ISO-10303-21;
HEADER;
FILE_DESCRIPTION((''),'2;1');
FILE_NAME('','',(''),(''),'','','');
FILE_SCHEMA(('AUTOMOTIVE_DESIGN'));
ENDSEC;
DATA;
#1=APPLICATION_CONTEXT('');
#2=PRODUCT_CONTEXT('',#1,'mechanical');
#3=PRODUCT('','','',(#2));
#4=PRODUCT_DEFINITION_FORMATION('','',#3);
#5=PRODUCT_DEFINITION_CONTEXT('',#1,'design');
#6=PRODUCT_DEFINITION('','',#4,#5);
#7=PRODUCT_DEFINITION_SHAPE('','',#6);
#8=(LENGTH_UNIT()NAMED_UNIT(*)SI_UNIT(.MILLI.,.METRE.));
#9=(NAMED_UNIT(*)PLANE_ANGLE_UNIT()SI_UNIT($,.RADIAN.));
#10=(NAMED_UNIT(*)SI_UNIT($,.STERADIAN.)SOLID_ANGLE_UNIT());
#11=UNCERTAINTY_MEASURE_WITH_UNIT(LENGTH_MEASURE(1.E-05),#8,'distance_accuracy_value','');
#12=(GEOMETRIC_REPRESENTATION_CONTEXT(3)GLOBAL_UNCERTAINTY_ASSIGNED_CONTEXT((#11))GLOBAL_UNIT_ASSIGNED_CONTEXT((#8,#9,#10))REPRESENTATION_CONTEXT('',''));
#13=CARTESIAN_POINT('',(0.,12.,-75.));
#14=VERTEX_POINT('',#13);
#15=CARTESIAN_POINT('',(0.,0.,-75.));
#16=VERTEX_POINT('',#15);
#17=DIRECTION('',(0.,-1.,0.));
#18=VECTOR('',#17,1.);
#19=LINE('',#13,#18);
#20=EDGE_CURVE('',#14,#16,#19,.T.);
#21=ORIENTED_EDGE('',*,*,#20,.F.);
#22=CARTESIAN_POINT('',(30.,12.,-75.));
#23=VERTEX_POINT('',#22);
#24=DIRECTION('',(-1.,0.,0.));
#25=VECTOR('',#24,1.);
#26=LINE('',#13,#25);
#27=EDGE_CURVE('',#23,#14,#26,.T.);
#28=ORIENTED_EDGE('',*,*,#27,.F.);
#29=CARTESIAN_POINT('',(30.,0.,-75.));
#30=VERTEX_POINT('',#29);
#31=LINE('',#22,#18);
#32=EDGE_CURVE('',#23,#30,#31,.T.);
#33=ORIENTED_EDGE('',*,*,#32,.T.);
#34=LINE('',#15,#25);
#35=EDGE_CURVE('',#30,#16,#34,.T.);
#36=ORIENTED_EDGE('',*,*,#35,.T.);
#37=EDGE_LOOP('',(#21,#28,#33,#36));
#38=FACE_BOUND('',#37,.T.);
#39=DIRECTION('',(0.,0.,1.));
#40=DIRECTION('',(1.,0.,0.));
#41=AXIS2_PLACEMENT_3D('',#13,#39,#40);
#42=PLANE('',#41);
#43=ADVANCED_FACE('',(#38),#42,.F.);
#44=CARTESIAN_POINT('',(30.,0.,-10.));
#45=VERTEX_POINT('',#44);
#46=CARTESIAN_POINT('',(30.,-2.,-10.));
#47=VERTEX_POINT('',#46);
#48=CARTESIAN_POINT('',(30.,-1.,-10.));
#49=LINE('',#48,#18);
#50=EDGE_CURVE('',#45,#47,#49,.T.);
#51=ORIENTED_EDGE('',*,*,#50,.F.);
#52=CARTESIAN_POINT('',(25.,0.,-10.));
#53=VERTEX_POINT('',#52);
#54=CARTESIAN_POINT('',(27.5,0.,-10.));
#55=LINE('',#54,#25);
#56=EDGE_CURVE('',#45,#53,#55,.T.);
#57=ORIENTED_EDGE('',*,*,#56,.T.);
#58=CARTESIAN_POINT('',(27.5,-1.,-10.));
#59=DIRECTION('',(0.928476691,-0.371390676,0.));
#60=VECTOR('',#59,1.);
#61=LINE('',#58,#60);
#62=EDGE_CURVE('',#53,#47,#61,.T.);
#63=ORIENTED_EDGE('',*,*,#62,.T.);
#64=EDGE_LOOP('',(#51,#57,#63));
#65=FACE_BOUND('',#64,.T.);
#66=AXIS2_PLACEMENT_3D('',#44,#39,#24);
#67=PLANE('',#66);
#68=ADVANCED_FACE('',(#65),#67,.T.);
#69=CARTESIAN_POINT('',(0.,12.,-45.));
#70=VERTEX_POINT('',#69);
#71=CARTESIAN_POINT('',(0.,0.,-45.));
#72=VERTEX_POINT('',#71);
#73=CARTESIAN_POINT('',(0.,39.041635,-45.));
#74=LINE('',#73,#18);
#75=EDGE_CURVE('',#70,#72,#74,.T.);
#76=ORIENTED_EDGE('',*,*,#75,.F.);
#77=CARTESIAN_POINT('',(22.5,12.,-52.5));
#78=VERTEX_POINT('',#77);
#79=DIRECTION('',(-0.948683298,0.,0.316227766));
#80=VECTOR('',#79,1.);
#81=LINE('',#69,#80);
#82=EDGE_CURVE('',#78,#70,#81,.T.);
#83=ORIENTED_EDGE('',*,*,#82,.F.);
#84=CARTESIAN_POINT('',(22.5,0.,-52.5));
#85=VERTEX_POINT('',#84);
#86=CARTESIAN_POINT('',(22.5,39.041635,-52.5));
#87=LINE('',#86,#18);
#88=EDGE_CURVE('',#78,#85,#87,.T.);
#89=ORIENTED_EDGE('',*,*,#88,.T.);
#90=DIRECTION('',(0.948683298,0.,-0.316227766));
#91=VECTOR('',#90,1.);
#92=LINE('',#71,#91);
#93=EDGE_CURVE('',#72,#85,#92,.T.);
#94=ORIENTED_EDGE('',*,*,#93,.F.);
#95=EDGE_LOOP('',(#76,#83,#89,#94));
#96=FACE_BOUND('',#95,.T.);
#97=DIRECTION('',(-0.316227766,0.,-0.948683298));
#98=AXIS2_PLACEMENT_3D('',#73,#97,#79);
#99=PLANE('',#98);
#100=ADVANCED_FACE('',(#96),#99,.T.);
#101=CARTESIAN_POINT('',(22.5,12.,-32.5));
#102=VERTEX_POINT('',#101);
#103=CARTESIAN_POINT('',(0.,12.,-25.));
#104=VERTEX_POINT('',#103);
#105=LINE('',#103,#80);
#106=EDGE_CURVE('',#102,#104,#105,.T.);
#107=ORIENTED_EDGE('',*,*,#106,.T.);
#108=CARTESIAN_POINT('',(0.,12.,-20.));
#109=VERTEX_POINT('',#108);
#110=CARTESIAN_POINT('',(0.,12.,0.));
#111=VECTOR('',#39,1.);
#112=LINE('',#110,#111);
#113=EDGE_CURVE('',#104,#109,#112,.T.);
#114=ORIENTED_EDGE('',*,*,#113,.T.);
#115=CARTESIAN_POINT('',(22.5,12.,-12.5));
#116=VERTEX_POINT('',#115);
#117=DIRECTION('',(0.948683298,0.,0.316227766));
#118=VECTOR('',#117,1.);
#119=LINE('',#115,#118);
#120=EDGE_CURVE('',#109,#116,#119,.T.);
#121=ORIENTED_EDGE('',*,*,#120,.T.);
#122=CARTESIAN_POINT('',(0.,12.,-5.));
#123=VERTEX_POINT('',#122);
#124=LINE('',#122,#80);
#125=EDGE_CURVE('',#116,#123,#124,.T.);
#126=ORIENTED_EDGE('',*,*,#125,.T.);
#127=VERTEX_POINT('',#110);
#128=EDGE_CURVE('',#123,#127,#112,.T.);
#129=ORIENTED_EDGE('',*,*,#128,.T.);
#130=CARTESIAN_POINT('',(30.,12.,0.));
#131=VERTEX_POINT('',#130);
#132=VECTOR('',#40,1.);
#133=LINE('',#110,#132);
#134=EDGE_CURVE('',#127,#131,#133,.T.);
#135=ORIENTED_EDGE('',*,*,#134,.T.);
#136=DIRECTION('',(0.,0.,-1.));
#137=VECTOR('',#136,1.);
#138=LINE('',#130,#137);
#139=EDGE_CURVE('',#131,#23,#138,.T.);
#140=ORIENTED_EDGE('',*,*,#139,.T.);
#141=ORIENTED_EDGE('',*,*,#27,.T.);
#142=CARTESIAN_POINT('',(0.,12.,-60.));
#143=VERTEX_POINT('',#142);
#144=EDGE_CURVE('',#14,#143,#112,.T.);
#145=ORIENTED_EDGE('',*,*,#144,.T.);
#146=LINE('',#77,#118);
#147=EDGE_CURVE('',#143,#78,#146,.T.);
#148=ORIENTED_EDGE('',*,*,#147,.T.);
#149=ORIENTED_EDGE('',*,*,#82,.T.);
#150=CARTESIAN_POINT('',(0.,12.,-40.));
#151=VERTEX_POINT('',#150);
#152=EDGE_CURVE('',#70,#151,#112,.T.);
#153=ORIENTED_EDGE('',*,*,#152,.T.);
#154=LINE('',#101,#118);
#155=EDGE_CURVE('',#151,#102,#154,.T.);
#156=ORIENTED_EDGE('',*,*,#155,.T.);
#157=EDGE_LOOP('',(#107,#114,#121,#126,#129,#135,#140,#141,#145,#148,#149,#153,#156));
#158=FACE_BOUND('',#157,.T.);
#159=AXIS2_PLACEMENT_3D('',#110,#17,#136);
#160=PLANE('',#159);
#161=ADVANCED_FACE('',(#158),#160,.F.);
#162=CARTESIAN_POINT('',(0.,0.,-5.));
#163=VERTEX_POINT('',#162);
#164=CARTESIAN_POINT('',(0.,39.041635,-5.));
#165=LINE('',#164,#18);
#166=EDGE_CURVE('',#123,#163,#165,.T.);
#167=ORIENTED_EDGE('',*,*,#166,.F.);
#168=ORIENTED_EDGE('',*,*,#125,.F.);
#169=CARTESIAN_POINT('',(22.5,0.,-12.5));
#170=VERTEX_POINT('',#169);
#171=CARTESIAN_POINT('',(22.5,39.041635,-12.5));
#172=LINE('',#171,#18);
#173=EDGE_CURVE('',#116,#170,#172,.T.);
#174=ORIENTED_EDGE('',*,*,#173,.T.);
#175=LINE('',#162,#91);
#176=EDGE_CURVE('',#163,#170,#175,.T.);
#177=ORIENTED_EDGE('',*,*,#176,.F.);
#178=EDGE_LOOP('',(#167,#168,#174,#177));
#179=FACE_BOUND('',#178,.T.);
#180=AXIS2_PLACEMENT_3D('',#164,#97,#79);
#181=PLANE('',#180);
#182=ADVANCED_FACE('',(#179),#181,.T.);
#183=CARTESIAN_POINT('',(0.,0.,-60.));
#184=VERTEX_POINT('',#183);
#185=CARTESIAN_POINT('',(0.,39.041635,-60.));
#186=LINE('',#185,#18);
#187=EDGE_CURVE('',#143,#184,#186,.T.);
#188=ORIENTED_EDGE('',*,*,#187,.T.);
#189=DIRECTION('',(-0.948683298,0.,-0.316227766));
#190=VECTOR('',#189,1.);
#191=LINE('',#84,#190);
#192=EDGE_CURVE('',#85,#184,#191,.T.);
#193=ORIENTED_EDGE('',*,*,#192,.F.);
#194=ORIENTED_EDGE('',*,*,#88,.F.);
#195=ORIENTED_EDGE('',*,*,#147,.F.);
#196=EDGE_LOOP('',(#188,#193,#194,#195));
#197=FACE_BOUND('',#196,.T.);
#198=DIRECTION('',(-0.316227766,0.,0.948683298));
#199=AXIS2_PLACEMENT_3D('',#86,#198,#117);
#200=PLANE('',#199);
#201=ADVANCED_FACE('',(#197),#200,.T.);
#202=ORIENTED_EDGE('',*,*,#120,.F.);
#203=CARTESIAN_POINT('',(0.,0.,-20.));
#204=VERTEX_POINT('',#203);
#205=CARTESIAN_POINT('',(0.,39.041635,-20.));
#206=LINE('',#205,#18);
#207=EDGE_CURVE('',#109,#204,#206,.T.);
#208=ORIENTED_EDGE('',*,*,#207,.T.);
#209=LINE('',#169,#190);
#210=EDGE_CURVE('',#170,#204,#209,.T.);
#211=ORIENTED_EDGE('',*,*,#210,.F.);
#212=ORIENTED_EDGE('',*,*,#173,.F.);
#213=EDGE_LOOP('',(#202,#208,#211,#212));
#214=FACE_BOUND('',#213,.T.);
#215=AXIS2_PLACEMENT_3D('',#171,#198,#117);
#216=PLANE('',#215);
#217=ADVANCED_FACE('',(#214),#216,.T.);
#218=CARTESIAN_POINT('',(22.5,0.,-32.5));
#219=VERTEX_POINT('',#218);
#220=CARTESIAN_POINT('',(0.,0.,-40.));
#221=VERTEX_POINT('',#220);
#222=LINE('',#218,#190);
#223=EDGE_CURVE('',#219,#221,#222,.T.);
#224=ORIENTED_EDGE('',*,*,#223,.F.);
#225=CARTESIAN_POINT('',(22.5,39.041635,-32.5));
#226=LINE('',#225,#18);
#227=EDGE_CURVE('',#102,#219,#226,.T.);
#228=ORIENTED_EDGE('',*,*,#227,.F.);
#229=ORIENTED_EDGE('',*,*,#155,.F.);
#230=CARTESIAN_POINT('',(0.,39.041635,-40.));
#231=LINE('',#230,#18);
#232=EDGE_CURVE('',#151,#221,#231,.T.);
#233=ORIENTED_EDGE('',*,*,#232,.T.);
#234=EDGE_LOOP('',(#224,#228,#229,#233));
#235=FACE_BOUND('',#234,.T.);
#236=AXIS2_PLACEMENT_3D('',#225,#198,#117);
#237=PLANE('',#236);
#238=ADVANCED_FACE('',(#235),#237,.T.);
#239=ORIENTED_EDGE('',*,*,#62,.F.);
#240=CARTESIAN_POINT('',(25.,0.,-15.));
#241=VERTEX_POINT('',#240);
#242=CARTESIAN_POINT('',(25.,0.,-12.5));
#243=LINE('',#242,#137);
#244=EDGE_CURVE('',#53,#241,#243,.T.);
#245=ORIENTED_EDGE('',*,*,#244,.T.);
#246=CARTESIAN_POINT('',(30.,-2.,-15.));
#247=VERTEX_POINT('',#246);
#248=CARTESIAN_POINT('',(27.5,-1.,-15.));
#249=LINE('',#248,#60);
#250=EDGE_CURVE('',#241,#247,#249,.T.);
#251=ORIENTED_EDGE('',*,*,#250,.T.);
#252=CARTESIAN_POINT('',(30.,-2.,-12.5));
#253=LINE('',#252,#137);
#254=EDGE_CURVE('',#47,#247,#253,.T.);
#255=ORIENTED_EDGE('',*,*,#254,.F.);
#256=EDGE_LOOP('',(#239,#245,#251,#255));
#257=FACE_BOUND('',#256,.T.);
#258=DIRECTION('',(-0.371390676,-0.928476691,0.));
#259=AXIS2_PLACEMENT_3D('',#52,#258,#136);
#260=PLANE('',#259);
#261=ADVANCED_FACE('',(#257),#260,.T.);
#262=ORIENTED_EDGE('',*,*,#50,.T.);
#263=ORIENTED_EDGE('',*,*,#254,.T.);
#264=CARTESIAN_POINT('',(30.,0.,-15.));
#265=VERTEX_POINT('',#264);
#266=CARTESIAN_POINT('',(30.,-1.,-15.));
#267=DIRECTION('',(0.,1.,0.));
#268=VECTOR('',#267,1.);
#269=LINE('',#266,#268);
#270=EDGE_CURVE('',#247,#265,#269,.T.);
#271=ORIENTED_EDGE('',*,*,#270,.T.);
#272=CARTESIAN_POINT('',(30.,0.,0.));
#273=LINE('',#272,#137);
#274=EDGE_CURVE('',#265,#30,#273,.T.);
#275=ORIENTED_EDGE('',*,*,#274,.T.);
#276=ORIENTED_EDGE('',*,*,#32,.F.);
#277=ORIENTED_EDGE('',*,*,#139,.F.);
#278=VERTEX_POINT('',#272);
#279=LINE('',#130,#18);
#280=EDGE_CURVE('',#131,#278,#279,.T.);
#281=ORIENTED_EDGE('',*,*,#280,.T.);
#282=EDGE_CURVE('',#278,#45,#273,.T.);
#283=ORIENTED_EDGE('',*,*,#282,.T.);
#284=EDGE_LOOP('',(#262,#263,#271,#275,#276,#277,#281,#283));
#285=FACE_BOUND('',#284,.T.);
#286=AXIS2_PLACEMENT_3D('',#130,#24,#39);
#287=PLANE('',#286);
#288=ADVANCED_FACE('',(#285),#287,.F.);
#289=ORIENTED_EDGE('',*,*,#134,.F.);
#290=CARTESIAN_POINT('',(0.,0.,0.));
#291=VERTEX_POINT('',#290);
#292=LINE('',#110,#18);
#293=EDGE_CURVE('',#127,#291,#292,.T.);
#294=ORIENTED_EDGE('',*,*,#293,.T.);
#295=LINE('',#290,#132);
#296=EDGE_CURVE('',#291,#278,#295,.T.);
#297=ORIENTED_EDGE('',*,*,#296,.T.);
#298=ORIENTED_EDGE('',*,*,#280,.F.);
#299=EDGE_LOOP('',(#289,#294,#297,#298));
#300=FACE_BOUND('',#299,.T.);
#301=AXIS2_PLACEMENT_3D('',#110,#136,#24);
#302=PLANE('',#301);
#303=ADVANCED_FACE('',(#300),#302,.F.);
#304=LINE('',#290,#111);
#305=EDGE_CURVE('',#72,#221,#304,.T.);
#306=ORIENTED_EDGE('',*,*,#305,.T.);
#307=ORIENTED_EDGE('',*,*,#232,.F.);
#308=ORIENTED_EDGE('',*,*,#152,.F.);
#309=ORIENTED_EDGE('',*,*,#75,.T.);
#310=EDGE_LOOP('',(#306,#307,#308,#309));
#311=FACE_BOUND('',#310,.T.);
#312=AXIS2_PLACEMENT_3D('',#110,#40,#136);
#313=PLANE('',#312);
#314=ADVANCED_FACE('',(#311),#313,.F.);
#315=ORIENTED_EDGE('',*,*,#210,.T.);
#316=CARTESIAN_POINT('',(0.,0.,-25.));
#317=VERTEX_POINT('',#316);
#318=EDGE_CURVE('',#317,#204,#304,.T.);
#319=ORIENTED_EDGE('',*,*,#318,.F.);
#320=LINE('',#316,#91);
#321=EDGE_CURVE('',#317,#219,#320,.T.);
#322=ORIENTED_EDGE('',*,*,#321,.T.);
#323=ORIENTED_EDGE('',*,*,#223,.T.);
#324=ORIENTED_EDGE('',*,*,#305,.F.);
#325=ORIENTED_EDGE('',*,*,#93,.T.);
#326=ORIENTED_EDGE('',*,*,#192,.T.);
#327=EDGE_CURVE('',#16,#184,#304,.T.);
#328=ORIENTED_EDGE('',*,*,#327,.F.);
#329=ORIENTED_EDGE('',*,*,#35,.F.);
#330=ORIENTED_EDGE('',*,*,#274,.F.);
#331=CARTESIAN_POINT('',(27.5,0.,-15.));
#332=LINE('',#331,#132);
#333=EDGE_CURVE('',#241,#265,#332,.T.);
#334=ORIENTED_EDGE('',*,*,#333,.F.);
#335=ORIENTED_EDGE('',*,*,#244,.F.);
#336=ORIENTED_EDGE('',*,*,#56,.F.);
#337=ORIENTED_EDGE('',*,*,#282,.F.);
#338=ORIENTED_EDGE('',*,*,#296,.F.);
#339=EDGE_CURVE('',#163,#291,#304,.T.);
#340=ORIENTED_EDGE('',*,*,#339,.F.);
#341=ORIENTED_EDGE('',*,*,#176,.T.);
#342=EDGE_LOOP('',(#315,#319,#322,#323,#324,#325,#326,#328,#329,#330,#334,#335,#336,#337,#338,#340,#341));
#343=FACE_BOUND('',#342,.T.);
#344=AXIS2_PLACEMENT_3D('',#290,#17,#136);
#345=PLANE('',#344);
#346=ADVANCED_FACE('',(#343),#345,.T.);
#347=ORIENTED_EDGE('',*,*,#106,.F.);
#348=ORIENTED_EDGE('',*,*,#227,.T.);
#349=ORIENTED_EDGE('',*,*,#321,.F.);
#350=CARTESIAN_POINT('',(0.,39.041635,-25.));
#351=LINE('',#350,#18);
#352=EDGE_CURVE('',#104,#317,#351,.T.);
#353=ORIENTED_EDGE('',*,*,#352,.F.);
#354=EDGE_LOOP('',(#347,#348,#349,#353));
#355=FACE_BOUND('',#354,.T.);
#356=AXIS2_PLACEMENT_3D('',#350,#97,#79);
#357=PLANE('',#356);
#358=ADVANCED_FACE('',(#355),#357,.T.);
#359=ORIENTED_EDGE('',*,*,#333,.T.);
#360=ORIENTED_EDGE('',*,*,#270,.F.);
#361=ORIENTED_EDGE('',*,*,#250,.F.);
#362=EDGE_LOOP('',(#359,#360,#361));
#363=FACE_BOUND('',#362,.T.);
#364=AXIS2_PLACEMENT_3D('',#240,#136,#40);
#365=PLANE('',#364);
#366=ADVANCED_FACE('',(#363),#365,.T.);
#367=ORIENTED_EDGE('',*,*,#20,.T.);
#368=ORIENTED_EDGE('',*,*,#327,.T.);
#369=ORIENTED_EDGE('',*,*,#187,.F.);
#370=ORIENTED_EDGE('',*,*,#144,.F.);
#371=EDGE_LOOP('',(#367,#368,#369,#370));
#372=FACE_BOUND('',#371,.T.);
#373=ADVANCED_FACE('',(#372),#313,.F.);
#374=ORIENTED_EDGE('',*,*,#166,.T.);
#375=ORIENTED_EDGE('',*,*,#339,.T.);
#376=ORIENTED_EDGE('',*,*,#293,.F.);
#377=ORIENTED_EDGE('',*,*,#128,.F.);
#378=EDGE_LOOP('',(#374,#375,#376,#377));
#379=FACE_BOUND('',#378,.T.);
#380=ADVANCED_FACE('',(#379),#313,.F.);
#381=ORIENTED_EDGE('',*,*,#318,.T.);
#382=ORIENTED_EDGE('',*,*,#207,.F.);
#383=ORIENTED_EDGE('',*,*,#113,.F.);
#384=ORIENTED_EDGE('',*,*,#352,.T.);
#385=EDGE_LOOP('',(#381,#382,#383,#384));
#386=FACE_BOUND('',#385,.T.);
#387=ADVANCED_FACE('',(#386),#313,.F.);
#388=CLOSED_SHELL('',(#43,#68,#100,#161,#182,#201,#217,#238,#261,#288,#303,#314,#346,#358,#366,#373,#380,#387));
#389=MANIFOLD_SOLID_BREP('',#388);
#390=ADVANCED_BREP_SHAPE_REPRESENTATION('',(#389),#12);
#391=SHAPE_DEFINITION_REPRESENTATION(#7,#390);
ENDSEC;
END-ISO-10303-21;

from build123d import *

# Parameters (mm, degrees)
SKETCH1_W           = 30
SKETCH1_H           = 75
BOSS_EXTRUDE1_DEPTH = 12
CUT_EXTRUDE1_DEPTH  = 12
LPATTERN1_COUNT     = 3
LPATTERN1_PITCH     = 20
BOUNDARY2_START     = -15
BOUNDARY2_DEPTH     = 5


# Read off the part's stored shape, not the designer's step: Boundary2
with BuildPart() as part:
    # Sketch1 → Boss-Extrude1 (new body)
    with BuildSketch(Plane(origin=(0, 0, 0), x_dir=(1, 0, 0), z_dir=(0, 1, 0))):
        with Locations((15, 37.5)):
            Rectangle(SKETCH1_W, SKETCH1_H)
    extrude(amount=BOSS_EXTRUDE1_DEPTH)

    # Sketch3 → Cut-Extrude1 (cut)
    with BuildSketch(Plane(origin=(0, 0, 0), x_dir=(1, 0, 0), z_dir=(0, 1, 0))):
        Polygon((0, 5), (22.5, 12.5), (0, 20), align=None)
    cut_extrude1 = extrude(amount=CUT_EXTRUDE1_DEPTH, mode=Mode.SUBTRACT)

    # LPattern1: Cut-Extrude1 ×3
    with Locations(*[(0, 0, -i * LPATTERN1_PITCH) for i in range(1, LPATTERN1_COUNT)]):
        add(cut_extrude1, mode=Mode.SUBTRACT)

    # Boundary2 outline → Boundary2 (add)
    with BuildSketch(Plane.XY.offset(BOUNDARY2_START)):
        Polygon((30, 0), (25, 0), (30, -2), align=None)
    extrude(amount=BOUNDARY2_DEPTH)


solid = part.part
